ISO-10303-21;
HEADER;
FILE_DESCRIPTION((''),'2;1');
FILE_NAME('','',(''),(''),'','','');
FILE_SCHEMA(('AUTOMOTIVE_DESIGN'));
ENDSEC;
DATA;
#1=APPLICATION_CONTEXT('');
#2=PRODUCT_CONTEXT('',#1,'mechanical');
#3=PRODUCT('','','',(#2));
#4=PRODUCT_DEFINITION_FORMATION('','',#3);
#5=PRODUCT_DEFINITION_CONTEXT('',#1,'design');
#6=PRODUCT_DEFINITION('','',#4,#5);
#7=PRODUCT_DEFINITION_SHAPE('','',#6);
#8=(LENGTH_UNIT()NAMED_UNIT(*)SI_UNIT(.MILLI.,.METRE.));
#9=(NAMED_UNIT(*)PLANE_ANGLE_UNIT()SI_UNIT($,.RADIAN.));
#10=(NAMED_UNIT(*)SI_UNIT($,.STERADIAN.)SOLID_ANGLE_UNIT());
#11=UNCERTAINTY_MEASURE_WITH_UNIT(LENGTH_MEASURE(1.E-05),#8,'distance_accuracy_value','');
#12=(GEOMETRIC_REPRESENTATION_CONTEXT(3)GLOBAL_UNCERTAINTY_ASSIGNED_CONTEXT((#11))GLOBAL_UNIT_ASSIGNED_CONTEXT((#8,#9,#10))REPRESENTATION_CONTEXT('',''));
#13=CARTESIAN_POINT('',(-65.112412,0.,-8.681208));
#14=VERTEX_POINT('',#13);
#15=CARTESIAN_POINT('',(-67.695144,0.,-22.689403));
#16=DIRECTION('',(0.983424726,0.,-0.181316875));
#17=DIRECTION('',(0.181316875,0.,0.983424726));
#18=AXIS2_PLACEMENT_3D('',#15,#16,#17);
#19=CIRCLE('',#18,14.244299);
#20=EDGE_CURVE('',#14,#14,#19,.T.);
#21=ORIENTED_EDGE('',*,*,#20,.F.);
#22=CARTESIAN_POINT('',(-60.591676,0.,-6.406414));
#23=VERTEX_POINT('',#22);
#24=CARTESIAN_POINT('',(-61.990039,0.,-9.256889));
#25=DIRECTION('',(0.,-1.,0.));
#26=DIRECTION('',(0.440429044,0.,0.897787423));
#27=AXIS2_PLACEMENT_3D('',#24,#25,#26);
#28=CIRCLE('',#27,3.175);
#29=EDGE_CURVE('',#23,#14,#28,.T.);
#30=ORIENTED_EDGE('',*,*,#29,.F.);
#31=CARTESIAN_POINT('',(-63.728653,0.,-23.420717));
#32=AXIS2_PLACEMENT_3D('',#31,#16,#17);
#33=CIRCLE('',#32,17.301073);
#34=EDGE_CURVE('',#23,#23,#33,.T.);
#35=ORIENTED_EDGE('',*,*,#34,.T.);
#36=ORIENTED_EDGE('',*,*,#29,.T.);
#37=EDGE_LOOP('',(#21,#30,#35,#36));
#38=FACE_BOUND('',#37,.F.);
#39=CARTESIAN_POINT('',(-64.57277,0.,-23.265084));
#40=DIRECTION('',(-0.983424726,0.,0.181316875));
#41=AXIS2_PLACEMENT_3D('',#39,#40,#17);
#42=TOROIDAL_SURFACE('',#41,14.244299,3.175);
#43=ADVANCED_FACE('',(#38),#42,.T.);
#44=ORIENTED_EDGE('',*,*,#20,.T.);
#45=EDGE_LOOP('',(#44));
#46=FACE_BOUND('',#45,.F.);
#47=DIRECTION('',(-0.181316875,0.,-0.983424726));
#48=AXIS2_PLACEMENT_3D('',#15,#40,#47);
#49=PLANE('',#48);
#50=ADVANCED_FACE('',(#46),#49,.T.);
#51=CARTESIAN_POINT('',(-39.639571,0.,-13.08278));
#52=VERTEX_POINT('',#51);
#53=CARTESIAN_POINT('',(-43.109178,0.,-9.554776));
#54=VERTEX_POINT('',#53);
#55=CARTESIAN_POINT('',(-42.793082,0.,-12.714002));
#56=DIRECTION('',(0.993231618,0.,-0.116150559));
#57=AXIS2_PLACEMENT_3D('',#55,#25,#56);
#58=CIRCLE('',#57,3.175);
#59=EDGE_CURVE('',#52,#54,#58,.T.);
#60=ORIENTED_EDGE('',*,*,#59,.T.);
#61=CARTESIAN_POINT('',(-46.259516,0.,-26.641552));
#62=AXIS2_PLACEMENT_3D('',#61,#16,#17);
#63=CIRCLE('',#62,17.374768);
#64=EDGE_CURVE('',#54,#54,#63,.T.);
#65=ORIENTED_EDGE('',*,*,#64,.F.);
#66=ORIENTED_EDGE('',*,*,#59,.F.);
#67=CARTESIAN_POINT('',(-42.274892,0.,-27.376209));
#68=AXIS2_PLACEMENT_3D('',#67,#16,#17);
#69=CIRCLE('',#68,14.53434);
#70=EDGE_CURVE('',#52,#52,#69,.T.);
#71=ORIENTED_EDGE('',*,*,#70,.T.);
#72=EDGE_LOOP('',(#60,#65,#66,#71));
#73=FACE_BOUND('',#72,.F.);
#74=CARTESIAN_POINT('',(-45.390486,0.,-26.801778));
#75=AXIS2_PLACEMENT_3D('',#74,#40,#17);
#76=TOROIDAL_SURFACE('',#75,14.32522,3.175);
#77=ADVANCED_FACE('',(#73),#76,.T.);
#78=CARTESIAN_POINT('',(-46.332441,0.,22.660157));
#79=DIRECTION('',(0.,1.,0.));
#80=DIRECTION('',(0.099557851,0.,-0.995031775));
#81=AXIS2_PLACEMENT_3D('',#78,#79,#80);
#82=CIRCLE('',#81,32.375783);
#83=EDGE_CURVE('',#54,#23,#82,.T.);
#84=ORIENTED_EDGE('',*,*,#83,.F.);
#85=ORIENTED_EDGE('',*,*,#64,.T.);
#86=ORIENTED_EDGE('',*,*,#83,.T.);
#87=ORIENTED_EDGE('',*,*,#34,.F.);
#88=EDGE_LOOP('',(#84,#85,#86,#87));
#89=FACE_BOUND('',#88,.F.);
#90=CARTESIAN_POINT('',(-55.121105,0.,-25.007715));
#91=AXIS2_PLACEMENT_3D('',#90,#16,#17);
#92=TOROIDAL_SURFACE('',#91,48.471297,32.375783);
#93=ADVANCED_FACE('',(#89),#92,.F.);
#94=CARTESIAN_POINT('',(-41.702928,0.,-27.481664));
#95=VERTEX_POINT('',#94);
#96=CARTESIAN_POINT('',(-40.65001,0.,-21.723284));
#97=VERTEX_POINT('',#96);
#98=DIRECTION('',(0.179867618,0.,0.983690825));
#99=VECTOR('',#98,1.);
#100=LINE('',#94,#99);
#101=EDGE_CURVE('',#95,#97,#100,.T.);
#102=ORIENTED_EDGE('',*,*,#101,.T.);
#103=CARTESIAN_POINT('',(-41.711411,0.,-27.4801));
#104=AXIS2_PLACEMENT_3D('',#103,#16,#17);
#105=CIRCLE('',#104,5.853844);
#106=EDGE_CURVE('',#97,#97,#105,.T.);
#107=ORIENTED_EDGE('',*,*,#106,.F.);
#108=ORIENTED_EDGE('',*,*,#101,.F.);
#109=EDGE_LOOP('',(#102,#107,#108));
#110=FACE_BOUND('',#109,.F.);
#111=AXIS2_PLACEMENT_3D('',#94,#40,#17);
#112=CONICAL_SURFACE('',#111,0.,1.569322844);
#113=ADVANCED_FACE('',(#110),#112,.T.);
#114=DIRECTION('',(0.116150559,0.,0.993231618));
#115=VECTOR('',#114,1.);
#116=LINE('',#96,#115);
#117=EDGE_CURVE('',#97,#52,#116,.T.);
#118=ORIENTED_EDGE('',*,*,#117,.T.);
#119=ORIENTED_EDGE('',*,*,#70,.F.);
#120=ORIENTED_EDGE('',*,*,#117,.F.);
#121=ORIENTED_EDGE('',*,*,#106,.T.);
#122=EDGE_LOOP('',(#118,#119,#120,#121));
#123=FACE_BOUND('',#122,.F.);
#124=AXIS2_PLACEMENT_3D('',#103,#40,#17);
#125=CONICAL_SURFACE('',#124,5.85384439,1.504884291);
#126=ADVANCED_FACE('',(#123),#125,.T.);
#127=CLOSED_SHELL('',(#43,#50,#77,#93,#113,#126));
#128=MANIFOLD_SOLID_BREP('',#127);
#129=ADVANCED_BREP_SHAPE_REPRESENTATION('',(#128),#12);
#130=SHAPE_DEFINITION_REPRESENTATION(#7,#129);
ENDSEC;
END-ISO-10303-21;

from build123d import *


with BuildPart() as f1:
    # F0 (on Front) → F1 (revolve)
    with BuildSketch(Plane.XZ):
        with BuildLine():
            ThreePointArc((-43.1091779093, -9.5547758593), (-52.0705780398, -9.2030680727), (-60.5916763105, -6.4064138345))
            ThreePointArc((-60.5916763105, -6.4064138345), (-63.4171775016, -6.4207120143), (-65.1124120295, -8.681207826))
            Line((-65.1124120295, -8.681207826), (-66.6337429499, -16.9325878819))
            Line((-66.6337429499, -16.9325878819), (-40.6500098054, -21.7232842734))
            Line((-40.6500098054, -21.7232842734), (-39.6395713434, -13.0827797716))
            ThreePointArc((-39.6395713434, -13.0827797716), (-40.5293607347, -10.487751031), (-43.1091779093, -9.5547758593))
        make_face()
        Polygon((-40.6500098054, -21.7232842734), (-66.6337429499, -16.9325878819), (-67.6951437192, -22.6894031954), (-41.702927998, -27.4816635443), align=None)
    revolve(axis=Axis((-54.6990358586, 0, -25.0855333699), (0.9834247256, 0, -0.1813168746)))


solid = f1.part
